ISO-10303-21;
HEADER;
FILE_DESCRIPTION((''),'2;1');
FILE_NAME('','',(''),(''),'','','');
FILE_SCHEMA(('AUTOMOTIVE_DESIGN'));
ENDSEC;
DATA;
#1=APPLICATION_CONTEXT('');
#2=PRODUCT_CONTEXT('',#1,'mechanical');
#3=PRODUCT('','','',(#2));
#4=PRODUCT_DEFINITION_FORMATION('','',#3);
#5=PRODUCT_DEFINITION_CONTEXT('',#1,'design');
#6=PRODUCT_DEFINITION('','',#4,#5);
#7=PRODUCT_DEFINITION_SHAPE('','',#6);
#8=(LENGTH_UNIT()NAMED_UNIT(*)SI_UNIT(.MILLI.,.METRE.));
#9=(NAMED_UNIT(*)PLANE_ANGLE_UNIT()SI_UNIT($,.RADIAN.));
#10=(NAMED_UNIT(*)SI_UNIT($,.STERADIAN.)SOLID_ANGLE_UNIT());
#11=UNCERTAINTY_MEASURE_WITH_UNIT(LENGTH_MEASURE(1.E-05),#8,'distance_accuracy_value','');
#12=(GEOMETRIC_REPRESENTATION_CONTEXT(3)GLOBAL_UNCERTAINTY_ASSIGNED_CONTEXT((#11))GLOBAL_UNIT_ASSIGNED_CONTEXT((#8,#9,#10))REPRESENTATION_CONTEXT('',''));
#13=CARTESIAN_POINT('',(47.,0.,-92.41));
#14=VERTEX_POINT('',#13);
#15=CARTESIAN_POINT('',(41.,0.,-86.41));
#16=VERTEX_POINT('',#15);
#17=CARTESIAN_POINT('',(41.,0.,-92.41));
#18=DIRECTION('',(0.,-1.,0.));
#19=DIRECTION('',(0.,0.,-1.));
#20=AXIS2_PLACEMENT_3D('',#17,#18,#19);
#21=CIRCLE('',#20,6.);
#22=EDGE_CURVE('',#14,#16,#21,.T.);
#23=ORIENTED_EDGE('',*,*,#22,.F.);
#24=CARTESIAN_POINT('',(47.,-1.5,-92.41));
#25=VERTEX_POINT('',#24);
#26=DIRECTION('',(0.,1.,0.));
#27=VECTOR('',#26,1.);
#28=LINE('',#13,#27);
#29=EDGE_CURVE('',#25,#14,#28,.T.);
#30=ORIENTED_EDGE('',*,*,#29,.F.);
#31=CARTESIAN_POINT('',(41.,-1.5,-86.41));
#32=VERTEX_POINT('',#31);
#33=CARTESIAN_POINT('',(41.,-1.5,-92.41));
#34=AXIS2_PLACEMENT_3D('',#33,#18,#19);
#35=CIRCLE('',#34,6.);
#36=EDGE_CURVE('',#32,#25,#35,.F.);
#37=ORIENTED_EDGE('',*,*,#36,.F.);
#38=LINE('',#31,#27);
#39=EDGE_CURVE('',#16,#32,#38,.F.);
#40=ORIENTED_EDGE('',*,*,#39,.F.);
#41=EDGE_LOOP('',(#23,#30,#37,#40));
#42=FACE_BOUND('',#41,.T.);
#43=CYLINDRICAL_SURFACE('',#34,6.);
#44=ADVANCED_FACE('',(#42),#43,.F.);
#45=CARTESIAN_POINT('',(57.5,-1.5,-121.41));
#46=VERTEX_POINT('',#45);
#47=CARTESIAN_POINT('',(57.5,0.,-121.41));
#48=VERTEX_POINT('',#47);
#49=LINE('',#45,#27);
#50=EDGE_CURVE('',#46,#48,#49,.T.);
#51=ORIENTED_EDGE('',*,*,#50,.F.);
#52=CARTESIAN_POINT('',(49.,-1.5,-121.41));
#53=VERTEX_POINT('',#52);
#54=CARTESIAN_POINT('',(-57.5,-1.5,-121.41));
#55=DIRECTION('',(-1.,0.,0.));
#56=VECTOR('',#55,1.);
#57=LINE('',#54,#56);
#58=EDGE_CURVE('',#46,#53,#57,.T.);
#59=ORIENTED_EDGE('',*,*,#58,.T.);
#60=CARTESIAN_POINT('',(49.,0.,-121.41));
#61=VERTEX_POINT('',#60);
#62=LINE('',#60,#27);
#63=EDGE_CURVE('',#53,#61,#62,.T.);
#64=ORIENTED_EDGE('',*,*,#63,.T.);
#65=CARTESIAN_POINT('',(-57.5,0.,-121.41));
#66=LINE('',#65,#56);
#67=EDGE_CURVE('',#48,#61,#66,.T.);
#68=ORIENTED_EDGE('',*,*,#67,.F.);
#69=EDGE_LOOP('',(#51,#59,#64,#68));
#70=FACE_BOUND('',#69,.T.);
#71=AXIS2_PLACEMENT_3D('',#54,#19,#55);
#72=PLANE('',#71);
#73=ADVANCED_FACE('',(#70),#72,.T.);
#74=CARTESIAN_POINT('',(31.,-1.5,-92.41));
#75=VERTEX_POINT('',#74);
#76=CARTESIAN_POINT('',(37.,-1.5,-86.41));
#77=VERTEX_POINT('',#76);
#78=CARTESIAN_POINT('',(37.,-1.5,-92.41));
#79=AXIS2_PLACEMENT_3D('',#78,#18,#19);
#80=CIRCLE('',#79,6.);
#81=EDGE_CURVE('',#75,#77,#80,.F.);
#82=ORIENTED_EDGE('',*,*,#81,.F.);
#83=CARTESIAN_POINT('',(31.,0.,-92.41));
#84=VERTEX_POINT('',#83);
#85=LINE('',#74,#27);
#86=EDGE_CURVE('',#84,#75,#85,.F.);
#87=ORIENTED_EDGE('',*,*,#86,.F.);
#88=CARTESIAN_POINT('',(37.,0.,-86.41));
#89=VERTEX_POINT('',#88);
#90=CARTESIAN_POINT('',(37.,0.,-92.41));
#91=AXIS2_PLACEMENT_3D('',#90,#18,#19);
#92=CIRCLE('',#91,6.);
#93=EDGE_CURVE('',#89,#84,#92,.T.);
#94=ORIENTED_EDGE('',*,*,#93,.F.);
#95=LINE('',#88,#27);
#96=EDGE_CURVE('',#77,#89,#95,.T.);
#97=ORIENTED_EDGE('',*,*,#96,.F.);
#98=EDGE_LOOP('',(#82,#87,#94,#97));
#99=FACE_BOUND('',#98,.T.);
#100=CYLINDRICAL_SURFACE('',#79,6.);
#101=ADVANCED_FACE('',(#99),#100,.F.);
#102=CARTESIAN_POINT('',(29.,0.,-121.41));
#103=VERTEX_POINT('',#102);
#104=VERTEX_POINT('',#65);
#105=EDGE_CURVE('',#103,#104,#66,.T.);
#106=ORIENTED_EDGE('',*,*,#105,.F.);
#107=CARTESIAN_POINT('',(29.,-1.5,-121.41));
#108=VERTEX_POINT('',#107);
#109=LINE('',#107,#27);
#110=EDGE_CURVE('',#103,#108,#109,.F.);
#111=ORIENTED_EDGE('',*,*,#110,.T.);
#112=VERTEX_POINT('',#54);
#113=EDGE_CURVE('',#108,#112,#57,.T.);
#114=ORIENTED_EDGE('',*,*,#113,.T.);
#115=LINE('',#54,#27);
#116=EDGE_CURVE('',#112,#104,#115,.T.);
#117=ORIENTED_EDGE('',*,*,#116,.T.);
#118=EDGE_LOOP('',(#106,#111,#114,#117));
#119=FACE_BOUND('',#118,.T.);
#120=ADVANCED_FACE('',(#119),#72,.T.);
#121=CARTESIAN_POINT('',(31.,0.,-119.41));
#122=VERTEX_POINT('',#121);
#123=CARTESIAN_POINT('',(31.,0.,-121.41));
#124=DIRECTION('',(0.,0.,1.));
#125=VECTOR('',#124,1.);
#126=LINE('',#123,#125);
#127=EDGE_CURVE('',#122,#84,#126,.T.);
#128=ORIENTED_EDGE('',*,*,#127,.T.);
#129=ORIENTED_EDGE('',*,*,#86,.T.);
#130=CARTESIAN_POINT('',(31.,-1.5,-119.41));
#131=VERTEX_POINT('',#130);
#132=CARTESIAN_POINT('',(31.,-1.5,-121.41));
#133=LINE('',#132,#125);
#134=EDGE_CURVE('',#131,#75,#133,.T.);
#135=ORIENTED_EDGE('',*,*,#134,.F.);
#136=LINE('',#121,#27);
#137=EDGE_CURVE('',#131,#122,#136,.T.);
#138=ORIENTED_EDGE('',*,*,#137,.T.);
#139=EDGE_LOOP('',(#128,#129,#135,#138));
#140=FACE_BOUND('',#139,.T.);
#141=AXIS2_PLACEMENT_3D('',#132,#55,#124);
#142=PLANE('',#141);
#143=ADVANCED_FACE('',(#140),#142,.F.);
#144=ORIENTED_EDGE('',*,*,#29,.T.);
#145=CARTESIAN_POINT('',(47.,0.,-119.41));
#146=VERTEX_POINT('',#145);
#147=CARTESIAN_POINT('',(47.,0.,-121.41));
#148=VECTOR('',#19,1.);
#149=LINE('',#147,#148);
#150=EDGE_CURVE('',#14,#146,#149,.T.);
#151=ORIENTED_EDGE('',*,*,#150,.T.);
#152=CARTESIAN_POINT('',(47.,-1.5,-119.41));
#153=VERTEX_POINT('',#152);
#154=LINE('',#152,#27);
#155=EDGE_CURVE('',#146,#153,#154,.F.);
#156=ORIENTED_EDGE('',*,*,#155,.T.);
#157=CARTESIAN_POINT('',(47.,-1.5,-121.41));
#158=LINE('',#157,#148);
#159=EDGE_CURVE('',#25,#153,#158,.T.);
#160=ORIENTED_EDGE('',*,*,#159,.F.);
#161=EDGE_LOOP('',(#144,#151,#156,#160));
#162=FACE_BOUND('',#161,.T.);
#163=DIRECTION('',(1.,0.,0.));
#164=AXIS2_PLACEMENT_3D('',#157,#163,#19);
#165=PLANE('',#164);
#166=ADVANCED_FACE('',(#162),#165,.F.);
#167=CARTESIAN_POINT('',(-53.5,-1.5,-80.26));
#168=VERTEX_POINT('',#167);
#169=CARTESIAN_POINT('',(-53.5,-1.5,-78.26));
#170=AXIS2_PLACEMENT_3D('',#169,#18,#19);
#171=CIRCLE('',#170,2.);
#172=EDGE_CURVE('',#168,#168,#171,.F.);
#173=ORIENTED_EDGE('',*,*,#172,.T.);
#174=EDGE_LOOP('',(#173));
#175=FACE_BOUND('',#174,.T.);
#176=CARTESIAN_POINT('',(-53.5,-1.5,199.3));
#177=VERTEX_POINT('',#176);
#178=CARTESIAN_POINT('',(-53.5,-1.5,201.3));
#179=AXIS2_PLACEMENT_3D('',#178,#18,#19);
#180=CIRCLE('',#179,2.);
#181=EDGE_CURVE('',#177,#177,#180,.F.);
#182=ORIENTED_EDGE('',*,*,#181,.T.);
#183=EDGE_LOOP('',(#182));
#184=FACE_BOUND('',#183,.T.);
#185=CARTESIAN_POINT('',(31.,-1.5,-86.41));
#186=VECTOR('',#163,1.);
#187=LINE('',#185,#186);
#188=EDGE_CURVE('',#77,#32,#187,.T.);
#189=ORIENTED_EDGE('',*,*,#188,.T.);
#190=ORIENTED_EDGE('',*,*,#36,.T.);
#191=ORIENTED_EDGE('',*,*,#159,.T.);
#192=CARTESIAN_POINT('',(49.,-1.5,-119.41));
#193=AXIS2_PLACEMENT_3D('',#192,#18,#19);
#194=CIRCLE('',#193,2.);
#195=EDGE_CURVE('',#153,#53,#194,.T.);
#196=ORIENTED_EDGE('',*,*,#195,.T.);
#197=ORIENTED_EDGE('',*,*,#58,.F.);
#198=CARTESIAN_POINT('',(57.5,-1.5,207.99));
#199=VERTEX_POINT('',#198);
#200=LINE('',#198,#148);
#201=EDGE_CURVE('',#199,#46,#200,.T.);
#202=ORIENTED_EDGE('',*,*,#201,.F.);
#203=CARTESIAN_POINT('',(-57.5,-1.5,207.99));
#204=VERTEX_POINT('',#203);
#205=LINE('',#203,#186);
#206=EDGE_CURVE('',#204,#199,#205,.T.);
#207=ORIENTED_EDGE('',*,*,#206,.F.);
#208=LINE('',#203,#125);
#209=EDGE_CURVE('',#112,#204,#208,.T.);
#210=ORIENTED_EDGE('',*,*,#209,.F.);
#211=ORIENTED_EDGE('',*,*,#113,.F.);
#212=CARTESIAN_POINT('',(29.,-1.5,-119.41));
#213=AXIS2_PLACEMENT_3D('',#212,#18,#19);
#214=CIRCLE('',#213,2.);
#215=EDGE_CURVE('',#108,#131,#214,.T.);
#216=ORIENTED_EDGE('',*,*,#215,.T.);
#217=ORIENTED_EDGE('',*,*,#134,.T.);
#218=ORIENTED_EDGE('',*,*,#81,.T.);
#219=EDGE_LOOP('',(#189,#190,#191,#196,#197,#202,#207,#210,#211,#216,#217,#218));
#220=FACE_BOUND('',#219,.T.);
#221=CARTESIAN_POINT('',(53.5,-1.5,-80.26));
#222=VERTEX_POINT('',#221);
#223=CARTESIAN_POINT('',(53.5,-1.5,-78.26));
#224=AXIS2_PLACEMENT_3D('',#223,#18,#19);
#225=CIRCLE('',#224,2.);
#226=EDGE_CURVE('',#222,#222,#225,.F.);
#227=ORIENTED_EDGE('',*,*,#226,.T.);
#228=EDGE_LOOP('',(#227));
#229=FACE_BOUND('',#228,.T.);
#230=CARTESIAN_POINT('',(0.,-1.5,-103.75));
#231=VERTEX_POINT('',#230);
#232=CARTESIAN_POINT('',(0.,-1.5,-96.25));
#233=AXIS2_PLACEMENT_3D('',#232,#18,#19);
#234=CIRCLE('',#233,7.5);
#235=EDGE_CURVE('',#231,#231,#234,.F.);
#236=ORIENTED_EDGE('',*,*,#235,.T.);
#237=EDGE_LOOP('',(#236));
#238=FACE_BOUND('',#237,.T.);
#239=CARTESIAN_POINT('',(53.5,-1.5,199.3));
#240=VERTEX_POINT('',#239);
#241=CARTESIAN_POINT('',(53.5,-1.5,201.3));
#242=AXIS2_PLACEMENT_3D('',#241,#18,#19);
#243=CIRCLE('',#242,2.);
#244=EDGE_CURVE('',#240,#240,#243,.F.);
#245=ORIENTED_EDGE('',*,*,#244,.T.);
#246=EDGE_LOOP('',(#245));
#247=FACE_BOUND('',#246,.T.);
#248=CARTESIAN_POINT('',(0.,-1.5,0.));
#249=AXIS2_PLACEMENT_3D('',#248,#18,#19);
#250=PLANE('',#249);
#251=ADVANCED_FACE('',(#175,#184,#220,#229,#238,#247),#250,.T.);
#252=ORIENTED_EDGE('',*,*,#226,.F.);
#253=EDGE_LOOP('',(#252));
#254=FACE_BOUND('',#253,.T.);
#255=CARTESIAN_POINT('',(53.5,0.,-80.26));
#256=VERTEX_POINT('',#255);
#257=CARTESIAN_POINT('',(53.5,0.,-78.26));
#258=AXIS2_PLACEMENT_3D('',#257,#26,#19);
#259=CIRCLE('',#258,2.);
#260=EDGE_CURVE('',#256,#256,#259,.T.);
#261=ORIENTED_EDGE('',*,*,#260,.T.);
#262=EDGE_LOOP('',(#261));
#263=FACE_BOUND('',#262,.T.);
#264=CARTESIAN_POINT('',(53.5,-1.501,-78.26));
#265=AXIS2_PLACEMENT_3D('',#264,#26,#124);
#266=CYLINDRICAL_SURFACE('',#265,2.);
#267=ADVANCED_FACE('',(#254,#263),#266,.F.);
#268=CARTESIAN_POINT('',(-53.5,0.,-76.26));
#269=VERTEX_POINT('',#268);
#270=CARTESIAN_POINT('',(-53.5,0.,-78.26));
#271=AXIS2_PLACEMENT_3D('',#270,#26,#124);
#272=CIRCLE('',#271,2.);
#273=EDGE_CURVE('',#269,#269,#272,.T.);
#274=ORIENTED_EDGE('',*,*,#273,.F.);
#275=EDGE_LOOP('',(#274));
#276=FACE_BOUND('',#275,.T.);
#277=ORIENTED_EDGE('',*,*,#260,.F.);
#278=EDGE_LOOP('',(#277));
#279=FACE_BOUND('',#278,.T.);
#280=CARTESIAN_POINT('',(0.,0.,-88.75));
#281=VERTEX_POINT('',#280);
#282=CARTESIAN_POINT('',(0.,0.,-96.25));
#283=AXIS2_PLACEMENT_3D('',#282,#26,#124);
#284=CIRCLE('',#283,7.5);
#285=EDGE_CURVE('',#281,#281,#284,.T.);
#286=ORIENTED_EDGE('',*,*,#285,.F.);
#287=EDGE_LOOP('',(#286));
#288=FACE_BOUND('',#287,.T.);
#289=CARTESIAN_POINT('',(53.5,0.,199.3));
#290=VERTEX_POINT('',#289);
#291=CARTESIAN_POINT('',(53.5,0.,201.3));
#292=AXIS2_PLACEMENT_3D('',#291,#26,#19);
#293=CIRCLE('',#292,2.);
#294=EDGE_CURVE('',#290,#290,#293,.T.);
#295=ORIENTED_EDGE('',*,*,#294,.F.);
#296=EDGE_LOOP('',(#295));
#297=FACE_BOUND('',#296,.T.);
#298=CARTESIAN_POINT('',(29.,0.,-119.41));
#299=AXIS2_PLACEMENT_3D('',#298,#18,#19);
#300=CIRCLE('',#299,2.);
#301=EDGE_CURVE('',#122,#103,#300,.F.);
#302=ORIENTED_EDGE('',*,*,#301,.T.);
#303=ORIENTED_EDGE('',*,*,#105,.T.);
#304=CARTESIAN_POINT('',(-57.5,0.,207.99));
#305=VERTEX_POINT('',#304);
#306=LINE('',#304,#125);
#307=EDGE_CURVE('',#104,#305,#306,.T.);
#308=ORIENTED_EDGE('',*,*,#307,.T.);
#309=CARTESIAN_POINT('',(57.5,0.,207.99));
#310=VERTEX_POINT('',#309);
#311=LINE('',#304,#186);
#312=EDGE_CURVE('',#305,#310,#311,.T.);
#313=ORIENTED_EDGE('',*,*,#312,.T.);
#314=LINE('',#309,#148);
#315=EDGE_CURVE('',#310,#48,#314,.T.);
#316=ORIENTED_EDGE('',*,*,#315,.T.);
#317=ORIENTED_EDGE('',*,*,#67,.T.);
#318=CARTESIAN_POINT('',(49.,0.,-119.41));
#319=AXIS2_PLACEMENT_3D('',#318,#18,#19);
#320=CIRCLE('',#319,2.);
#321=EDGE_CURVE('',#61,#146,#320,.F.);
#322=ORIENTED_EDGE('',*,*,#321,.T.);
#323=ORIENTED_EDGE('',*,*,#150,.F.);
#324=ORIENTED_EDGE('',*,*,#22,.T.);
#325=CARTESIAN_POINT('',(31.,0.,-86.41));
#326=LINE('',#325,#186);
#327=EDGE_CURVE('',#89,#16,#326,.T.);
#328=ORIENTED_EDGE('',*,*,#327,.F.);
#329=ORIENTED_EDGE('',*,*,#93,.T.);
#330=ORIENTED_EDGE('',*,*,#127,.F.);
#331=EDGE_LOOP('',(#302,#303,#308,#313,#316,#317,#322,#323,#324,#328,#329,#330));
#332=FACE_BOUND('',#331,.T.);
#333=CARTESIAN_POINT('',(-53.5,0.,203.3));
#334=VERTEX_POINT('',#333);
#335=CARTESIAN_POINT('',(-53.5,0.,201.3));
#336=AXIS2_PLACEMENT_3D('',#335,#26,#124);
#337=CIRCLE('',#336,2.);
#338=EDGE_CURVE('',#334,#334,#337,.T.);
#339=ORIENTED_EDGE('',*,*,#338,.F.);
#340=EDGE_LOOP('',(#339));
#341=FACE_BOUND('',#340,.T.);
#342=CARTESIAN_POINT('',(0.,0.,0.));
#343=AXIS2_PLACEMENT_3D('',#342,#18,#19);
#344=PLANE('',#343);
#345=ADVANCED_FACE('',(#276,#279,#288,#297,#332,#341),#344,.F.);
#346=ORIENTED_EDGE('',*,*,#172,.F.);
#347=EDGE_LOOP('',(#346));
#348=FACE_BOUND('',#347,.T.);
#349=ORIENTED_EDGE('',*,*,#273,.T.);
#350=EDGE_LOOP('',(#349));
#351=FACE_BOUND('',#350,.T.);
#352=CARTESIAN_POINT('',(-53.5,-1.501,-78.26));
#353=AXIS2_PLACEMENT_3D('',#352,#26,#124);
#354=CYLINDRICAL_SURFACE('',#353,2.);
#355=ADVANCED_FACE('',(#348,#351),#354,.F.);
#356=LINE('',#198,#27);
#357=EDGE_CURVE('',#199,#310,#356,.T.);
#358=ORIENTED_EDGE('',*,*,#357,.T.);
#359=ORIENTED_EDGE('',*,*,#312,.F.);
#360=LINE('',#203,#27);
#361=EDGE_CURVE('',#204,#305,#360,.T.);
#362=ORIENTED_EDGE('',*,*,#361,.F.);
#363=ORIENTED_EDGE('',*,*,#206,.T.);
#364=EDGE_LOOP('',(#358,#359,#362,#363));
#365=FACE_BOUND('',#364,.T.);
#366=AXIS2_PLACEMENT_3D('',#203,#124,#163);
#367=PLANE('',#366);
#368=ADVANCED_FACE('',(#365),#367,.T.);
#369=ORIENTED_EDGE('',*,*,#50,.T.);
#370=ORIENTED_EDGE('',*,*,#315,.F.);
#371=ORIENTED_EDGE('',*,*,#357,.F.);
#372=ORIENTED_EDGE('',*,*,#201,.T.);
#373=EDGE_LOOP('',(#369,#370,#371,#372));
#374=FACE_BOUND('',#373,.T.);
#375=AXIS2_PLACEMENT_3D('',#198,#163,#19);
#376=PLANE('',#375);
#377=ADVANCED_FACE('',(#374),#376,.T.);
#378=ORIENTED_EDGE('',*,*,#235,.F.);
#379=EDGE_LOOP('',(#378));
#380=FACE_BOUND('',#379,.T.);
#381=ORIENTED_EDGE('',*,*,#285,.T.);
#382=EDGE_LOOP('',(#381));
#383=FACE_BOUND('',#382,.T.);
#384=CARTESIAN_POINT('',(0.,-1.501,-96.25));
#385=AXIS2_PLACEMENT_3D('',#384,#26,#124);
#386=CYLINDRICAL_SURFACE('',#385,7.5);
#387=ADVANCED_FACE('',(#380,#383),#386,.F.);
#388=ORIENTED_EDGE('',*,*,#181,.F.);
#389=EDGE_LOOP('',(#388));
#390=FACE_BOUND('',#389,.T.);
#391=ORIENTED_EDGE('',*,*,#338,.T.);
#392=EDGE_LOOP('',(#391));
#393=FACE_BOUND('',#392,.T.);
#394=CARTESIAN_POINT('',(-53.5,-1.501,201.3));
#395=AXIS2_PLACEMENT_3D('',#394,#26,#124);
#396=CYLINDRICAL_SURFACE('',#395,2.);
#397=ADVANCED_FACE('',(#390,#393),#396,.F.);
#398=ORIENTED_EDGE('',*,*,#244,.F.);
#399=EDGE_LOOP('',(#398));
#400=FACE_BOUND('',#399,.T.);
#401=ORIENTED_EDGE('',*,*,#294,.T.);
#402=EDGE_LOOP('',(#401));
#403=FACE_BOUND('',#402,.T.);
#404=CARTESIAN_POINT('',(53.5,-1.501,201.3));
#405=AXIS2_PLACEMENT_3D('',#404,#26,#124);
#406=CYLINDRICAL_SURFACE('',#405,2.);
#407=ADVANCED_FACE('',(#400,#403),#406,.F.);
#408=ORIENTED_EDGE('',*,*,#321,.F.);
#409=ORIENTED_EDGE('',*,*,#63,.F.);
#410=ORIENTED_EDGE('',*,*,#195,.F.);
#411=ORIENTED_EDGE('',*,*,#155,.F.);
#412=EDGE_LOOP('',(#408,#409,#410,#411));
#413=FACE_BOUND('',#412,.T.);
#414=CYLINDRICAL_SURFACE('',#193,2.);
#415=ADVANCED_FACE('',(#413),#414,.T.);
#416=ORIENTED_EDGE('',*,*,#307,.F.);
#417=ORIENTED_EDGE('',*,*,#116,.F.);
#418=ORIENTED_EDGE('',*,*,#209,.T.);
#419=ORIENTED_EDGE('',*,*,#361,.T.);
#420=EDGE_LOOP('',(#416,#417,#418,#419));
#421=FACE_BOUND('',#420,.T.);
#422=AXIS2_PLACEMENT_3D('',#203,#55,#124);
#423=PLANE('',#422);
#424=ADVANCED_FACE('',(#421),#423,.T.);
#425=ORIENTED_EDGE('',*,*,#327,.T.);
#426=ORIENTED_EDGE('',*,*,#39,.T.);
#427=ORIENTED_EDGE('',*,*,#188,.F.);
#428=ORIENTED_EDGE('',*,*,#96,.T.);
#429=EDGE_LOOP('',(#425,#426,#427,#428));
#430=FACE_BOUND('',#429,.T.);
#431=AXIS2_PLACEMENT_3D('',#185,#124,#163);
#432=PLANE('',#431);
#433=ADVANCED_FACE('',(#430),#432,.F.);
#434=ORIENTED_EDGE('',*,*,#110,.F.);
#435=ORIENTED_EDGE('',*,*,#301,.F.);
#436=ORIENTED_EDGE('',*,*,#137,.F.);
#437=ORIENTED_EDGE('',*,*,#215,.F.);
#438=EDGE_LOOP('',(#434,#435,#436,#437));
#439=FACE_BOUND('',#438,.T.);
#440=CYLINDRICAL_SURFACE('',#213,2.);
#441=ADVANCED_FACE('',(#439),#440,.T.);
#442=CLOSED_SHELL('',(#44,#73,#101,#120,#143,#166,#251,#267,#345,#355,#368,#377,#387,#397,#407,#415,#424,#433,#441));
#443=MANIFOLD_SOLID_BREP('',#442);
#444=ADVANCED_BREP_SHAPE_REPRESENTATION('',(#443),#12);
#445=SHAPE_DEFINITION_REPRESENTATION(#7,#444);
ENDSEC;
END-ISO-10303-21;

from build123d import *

# Parameters (mm, degrees)
CROQUIS12_W           = 115
CROQUIS12_H           = 329.4
BRIDA_BASE2_DEPTH     = 1.5
CORTAR_EXTRUIR6_REACH = 217.797
CROQUIS27_R           = 2
CORTAR_EXTRUIR7_REACH = 217.797
CROQUIS28_R           = 7.5
CROQUIS29_W           = 16
CROQUIS29_H           = 35
CORTAR_EXTRUIR8_DEPTH = 216.796988162
REDONDEO1_R           = 6
REDONDEO2_R           = 2


# Sheet-metal steps are written as plain solids
with BuildPart() as part:
    # Croquis12 → Brida base2 (new body)
    with BuildSketch(Plane(origin=(0, 0, 0), x_dir=(1, 0, 0), z_dir=(0, 1, 0))):
        with Locations((0, -43.29)):
            Rectangle(CROQUIS12_W, CROQUIS12_H)
    extrude(amount=-BRIDA_BASE2_DEPTH)

    # Croquis27 → Cortar-Extruir6 (cut, up to next)
    with BuildSketch(Plane(origin=(0, 0, 0), x_dir=(1, 0, 0), z_dir=(0, 1, 0)), mode=Mode.PRIVATE) as cortar_extruir6_sk1:
        with Locations(Location((-53.5, -201.3, 0), (0, 0, 270))):
            Circle(CROQUIS27_R)
    cortar_extruir6_tool1 = extrude(cortar_extruir6_sk1.sketch, amount=-CORTAR_EXTRUIR6_REACH, mode=Mode.PRIVATE) & part.part
    # Croquis27 → Cortar-Extruir6 (cut, up to next)
    with BuildSketch(Plane(origin=(0, 0, 0), x_dir=(1, 0, 0), z_dir=(0, 1, 0)), mode=Mode.PRIVATE) as cortar_extruir6_sk2:
        with Locations(Location((-53.5, 78.26, 0), (0, 0, 270))):
            Circle(CROQUIS27_R)
    cortar_extruir6_tool2 = extrude(cortar_extruir6_sk2.sketch, amount=-CORTAR_EXTRUIR6_REACH, mode=Mode.PRIVATE) & part.part
    # Croquis27 → Cortar-Extruir6 (cut, up to next)
    with BuildSketch(Plane(origin=(0, 0, 0), x_dir=(1, 0, 0), z_dir=(0, 1, 0)), mode=Mode.PRIVATE) as cortar_extruir6_sk3:
        with Locations(Location((53.5, 78.26, 0), (0, 0, 90))):
            Circle(CROQUIS27_R)
    cortar_extruir6_tool3 = extrude(cortar_extruir6_sk3.sketch, amount=-CORTAR_EXTRUIR6_REACH, mode=Mode.PRIVATE) & part.part
    # Croquis27 → Cortar-Extruir6 (cut, up to next)
    with BuildSketch(Plane(origin=(0, 0, 0), x_dir=(1, 0, 0), z_dir=(0, 1, 0)), mode=Mode.PRIVATE) as cortar_extruir6_sk4:
        with Locations(Location((53.5, -201.3, 0), (0, 0, 90))):
            Circle(CROQUIS27_R)
    cortar_extruir6_tool4 = extrude(cortar_extruir6_sk4.sketch, amount=-CORTAR_EXTRUIR6_REACH, mode=Mode.PRIVATE) & part.part
    add(cortar_extruir6_tool1.solids().sort_by_distance((-53.5, 0, 201.3))[0], mode=Mode.SUBTRACT)
    add(cortar_extruir6_tool2.solids().sort_by_distance((-53.5, 0, -78.26))[0], mode=Mode.SUBTRACT)
    add(cortar_extruir6_tool3.solids().sort_by_distance((53.5, 0, -78.26))[0], mode=Mode.SUBTRACT)
    add(cortar_extruir6_tool4.solids().sort_by_distance((53.5, 0, 201.3))[0], mode=Mode.SUBTRACT)

    # Croquis28 → Cortar-Extruir7 (cut, up to next)
    with BuildSketch(Plane(origin=(0, 0, 0), x_dir=(1, 0, 0), z_dir=(0, 1, 0)), mode=Mode.PRIVATE) as cortar_extruir7_sk1:
        with Locations(Location((0, 96.25, 0), (0, 0, 270))):
            Circle(CROQUIS28_R)
    cortar_extruir7_tool1 = extrude(cortar_extruir7_sk1.sketch, amount=-CORTAR_EXTRUIR7_REACH, mode=Mode.PRIVATE) & part.part
    add(cortar_extruir7_tool1.solids().sort_by_distance((0, 0, -96.25))[0], mode=Mode.SUBTRACT)

    # Croquis29 → Cortar-Extruir8 (cut, through all)
    with BuildSketch(Plane(origin=(0, 0, 0), x_dir=(1, 0, 0), z_dir=(0, 1, 0))):
        with Locations((39, 103.91)):
            Rectangle(CROQUIS29_W, CROQUIS29_H)
    extrude(amount=-CORTAR_EXTRUIR8_DEPTH, mode=Mode.SUBTRACT)

    # Redondeo1
    redondeo1_edges = [part.edges().sort_by_distance(p)[0] for p in [
        (31, -0.75, -86.41),
        (47, -0.75, -86.41),
    ]]
    fillet(redondeo1_edges, radius=REDONDEO1_R)

    # Redondeo2
    redondeo2_edges = [part.edges().sort_by_distance(p)[0] for p in [
        (31, -0.75, -121.41),
        (47, -0.75, -121.41),
    ]]
    fillet(redondeo2_edges, radius=REDONDEO2_R)


solid = part.part
